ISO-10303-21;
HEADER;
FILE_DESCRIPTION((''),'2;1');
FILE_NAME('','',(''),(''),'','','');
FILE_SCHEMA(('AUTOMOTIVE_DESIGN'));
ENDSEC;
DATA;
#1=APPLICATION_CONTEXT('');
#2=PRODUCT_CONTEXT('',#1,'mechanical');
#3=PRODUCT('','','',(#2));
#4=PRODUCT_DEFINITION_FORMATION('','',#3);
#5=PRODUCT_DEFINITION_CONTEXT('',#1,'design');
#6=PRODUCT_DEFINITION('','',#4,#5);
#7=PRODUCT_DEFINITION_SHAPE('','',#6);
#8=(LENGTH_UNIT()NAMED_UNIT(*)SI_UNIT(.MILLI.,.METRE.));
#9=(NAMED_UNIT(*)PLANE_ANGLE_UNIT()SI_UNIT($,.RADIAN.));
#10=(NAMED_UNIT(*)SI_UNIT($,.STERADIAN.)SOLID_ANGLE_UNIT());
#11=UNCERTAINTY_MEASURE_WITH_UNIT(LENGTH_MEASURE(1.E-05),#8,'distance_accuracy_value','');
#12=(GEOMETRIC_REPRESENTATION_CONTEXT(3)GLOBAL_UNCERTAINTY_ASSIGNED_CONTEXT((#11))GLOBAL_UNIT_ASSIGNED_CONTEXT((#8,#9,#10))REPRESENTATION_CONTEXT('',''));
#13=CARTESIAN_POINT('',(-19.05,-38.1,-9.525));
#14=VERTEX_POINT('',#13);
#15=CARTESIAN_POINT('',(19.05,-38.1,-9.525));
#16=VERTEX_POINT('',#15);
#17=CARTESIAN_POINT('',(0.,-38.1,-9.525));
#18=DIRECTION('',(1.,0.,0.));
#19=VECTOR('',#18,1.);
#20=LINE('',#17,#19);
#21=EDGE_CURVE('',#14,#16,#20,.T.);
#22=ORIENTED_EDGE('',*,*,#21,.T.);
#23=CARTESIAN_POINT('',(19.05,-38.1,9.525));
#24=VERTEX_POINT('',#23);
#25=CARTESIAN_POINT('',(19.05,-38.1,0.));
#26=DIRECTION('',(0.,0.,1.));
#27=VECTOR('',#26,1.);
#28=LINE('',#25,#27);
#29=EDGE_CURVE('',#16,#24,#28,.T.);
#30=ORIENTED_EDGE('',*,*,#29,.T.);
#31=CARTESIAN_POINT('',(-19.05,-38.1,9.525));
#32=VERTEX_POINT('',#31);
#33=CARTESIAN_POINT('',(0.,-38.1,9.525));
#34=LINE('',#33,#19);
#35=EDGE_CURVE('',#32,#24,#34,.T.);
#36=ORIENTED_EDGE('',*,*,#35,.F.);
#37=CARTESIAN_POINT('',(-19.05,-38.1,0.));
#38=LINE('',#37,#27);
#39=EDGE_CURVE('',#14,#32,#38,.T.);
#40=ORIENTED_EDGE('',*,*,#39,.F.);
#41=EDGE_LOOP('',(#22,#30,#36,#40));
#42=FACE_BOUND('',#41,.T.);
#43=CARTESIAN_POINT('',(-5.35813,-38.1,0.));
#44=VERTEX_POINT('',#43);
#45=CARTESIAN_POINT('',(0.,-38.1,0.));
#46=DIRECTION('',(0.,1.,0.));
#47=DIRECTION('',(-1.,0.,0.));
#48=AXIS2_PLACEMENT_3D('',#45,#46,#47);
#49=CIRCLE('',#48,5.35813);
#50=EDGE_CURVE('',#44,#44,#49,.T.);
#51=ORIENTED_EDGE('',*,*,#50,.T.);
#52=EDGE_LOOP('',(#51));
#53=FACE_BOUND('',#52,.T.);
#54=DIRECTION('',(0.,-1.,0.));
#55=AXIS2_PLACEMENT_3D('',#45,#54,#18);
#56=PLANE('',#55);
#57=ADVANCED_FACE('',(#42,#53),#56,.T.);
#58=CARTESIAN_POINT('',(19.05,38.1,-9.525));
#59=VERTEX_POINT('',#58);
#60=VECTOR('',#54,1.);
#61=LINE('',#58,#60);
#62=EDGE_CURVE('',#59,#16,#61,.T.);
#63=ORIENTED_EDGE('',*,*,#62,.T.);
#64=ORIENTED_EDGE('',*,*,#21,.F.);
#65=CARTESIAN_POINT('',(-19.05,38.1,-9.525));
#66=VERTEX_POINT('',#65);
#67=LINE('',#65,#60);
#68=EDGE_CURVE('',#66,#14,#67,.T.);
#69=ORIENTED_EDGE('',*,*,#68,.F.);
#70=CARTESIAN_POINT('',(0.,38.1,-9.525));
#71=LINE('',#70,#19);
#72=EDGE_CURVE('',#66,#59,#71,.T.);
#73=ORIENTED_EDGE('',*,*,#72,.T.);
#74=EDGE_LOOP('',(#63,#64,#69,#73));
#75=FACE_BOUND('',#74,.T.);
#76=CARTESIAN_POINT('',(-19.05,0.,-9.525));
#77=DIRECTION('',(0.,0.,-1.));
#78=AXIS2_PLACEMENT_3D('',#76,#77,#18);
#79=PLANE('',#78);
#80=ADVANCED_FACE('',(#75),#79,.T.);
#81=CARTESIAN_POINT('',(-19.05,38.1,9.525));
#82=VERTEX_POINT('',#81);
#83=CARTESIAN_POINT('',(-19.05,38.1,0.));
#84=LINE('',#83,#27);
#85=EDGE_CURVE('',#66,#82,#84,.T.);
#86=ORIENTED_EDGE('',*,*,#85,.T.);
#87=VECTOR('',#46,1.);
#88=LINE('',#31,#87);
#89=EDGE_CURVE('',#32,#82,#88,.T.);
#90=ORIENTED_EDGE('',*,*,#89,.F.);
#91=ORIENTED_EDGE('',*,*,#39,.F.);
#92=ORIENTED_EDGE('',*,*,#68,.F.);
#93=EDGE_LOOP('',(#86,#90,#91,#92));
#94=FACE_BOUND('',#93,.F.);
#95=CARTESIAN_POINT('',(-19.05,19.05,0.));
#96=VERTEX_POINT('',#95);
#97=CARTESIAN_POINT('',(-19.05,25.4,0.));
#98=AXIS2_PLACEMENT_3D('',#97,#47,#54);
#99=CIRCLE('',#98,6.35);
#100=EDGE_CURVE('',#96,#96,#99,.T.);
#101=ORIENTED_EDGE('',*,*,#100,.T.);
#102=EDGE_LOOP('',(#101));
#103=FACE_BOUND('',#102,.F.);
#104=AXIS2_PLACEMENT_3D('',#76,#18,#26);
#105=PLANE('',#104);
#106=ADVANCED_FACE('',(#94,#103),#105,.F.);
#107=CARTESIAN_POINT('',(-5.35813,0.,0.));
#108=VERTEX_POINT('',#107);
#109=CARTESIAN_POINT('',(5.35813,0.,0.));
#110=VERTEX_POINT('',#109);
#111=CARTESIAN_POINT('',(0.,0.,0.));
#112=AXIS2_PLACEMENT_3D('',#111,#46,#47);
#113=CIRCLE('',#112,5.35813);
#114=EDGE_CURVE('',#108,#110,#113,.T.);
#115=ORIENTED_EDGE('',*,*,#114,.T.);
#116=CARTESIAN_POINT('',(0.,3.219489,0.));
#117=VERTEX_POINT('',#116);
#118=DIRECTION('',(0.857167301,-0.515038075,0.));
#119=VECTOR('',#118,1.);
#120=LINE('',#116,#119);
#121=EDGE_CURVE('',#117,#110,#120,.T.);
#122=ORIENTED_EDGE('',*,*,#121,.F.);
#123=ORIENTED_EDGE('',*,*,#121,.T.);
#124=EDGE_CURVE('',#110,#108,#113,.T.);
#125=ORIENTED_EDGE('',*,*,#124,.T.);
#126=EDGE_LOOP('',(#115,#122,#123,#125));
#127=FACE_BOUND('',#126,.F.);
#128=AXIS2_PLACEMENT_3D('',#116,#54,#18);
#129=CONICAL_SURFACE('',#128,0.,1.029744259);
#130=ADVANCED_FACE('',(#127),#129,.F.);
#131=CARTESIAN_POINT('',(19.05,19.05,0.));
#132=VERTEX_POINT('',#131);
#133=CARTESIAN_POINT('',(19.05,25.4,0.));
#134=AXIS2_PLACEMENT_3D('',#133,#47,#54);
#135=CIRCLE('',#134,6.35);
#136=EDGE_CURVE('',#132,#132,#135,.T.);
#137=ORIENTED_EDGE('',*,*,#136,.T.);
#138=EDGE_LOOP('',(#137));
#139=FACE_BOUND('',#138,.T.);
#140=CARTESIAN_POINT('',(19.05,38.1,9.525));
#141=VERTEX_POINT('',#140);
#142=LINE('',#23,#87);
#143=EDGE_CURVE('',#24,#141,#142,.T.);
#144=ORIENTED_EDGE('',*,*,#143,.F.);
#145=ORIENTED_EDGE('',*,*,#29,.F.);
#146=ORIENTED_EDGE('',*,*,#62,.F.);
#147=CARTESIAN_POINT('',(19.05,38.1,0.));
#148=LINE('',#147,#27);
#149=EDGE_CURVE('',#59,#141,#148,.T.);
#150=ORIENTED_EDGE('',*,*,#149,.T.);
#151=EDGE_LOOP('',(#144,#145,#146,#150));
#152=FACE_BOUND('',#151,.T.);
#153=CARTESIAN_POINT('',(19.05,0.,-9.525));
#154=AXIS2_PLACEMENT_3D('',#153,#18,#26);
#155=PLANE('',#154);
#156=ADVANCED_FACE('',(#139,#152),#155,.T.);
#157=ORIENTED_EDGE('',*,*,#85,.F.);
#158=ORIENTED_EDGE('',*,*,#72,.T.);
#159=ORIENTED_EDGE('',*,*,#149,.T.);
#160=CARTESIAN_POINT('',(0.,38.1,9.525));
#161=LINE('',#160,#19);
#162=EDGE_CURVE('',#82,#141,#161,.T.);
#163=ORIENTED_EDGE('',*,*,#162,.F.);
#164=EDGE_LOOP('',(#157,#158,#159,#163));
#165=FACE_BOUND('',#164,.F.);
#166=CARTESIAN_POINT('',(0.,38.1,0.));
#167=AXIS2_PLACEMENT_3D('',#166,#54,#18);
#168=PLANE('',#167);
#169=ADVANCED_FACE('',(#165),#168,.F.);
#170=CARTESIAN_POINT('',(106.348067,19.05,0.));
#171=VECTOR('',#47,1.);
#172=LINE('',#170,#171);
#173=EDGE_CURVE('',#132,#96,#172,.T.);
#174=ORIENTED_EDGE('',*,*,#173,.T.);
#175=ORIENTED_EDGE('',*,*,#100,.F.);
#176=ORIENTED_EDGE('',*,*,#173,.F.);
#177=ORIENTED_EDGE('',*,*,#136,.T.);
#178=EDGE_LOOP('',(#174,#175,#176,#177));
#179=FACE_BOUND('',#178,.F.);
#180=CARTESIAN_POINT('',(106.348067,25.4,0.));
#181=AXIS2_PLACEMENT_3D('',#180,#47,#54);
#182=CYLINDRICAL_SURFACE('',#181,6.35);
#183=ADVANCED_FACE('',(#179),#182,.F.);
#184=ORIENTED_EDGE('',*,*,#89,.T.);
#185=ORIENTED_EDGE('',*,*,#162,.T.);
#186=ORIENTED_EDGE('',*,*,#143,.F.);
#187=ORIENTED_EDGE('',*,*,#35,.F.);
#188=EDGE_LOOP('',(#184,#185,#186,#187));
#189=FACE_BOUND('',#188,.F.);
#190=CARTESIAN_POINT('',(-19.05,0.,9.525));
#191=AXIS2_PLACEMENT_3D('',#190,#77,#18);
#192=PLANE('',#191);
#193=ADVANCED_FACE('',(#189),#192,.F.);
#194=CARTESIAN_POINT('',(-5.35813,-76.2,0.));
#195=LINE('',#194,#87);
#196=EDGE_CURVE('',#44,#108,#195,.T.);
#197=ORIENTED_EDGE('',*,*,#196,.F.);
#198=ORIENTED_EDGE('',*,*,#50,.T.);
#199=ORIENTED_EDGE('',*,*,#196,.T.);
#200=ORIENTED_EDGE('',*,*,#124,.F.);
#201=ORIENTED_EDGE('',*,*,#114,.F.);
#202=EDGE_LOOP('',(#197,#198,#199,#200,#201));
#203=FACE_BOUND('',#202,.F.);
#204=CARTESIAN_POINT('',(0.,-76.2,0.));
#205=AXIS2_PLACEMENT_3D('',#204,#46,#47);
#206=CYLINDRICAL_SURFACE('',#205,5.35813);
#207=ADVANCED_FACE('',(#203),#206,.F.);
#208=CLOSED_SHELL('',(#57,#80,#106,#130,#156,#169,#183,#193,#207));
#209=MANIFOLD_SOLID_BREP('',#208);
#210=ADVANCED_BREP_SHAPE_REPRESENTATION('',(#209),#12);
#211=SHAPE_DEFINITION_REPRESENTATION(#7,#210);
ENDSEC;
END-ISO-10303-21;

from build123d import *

# Parameters (mm, degrees)
F0_W     = 38.1
F0_H     = 19.05
F1_DEPTH = 38.1
F4_D     = 10.71626
F4_DEPTH = 38.1
F4_TIP   = 3.2194893086
F5_D     = 12.7


# Not quite as in the source:
# - a length typed as a fraction of an inch, garbled in the dataset ("3 / 203.2 mm" for 3/8 in), is restored


with BuildPart() as f1:
    # F0 (on Front) → F1 (new body, symmetric)
    with BuildSketch(Plane.XZ):
        Rectangle(F0_W, F0_H)
    extrude(amount=F1_DEPTH, both=True)

    # F4
    with Locations(Plane.XZ.offset(38.1)):
        with Locations((0, 0)):
            Hole(F4_D / 2, depth=F4_DEPTH)
            with Locations((0, 0, -(F4_DEPTH + F4_TIP / 2))):  # 118° drill point
                Cone(0, F4_D / 2, F4_TIP, mode=Mode.SUBTRACT)

    # F5 (through all)
    with Locations(Plane.YZ.offset(19.05)):
        with Locations((25.4, 0)):
            Hole(F5_D / 2)


solid = f1.part
